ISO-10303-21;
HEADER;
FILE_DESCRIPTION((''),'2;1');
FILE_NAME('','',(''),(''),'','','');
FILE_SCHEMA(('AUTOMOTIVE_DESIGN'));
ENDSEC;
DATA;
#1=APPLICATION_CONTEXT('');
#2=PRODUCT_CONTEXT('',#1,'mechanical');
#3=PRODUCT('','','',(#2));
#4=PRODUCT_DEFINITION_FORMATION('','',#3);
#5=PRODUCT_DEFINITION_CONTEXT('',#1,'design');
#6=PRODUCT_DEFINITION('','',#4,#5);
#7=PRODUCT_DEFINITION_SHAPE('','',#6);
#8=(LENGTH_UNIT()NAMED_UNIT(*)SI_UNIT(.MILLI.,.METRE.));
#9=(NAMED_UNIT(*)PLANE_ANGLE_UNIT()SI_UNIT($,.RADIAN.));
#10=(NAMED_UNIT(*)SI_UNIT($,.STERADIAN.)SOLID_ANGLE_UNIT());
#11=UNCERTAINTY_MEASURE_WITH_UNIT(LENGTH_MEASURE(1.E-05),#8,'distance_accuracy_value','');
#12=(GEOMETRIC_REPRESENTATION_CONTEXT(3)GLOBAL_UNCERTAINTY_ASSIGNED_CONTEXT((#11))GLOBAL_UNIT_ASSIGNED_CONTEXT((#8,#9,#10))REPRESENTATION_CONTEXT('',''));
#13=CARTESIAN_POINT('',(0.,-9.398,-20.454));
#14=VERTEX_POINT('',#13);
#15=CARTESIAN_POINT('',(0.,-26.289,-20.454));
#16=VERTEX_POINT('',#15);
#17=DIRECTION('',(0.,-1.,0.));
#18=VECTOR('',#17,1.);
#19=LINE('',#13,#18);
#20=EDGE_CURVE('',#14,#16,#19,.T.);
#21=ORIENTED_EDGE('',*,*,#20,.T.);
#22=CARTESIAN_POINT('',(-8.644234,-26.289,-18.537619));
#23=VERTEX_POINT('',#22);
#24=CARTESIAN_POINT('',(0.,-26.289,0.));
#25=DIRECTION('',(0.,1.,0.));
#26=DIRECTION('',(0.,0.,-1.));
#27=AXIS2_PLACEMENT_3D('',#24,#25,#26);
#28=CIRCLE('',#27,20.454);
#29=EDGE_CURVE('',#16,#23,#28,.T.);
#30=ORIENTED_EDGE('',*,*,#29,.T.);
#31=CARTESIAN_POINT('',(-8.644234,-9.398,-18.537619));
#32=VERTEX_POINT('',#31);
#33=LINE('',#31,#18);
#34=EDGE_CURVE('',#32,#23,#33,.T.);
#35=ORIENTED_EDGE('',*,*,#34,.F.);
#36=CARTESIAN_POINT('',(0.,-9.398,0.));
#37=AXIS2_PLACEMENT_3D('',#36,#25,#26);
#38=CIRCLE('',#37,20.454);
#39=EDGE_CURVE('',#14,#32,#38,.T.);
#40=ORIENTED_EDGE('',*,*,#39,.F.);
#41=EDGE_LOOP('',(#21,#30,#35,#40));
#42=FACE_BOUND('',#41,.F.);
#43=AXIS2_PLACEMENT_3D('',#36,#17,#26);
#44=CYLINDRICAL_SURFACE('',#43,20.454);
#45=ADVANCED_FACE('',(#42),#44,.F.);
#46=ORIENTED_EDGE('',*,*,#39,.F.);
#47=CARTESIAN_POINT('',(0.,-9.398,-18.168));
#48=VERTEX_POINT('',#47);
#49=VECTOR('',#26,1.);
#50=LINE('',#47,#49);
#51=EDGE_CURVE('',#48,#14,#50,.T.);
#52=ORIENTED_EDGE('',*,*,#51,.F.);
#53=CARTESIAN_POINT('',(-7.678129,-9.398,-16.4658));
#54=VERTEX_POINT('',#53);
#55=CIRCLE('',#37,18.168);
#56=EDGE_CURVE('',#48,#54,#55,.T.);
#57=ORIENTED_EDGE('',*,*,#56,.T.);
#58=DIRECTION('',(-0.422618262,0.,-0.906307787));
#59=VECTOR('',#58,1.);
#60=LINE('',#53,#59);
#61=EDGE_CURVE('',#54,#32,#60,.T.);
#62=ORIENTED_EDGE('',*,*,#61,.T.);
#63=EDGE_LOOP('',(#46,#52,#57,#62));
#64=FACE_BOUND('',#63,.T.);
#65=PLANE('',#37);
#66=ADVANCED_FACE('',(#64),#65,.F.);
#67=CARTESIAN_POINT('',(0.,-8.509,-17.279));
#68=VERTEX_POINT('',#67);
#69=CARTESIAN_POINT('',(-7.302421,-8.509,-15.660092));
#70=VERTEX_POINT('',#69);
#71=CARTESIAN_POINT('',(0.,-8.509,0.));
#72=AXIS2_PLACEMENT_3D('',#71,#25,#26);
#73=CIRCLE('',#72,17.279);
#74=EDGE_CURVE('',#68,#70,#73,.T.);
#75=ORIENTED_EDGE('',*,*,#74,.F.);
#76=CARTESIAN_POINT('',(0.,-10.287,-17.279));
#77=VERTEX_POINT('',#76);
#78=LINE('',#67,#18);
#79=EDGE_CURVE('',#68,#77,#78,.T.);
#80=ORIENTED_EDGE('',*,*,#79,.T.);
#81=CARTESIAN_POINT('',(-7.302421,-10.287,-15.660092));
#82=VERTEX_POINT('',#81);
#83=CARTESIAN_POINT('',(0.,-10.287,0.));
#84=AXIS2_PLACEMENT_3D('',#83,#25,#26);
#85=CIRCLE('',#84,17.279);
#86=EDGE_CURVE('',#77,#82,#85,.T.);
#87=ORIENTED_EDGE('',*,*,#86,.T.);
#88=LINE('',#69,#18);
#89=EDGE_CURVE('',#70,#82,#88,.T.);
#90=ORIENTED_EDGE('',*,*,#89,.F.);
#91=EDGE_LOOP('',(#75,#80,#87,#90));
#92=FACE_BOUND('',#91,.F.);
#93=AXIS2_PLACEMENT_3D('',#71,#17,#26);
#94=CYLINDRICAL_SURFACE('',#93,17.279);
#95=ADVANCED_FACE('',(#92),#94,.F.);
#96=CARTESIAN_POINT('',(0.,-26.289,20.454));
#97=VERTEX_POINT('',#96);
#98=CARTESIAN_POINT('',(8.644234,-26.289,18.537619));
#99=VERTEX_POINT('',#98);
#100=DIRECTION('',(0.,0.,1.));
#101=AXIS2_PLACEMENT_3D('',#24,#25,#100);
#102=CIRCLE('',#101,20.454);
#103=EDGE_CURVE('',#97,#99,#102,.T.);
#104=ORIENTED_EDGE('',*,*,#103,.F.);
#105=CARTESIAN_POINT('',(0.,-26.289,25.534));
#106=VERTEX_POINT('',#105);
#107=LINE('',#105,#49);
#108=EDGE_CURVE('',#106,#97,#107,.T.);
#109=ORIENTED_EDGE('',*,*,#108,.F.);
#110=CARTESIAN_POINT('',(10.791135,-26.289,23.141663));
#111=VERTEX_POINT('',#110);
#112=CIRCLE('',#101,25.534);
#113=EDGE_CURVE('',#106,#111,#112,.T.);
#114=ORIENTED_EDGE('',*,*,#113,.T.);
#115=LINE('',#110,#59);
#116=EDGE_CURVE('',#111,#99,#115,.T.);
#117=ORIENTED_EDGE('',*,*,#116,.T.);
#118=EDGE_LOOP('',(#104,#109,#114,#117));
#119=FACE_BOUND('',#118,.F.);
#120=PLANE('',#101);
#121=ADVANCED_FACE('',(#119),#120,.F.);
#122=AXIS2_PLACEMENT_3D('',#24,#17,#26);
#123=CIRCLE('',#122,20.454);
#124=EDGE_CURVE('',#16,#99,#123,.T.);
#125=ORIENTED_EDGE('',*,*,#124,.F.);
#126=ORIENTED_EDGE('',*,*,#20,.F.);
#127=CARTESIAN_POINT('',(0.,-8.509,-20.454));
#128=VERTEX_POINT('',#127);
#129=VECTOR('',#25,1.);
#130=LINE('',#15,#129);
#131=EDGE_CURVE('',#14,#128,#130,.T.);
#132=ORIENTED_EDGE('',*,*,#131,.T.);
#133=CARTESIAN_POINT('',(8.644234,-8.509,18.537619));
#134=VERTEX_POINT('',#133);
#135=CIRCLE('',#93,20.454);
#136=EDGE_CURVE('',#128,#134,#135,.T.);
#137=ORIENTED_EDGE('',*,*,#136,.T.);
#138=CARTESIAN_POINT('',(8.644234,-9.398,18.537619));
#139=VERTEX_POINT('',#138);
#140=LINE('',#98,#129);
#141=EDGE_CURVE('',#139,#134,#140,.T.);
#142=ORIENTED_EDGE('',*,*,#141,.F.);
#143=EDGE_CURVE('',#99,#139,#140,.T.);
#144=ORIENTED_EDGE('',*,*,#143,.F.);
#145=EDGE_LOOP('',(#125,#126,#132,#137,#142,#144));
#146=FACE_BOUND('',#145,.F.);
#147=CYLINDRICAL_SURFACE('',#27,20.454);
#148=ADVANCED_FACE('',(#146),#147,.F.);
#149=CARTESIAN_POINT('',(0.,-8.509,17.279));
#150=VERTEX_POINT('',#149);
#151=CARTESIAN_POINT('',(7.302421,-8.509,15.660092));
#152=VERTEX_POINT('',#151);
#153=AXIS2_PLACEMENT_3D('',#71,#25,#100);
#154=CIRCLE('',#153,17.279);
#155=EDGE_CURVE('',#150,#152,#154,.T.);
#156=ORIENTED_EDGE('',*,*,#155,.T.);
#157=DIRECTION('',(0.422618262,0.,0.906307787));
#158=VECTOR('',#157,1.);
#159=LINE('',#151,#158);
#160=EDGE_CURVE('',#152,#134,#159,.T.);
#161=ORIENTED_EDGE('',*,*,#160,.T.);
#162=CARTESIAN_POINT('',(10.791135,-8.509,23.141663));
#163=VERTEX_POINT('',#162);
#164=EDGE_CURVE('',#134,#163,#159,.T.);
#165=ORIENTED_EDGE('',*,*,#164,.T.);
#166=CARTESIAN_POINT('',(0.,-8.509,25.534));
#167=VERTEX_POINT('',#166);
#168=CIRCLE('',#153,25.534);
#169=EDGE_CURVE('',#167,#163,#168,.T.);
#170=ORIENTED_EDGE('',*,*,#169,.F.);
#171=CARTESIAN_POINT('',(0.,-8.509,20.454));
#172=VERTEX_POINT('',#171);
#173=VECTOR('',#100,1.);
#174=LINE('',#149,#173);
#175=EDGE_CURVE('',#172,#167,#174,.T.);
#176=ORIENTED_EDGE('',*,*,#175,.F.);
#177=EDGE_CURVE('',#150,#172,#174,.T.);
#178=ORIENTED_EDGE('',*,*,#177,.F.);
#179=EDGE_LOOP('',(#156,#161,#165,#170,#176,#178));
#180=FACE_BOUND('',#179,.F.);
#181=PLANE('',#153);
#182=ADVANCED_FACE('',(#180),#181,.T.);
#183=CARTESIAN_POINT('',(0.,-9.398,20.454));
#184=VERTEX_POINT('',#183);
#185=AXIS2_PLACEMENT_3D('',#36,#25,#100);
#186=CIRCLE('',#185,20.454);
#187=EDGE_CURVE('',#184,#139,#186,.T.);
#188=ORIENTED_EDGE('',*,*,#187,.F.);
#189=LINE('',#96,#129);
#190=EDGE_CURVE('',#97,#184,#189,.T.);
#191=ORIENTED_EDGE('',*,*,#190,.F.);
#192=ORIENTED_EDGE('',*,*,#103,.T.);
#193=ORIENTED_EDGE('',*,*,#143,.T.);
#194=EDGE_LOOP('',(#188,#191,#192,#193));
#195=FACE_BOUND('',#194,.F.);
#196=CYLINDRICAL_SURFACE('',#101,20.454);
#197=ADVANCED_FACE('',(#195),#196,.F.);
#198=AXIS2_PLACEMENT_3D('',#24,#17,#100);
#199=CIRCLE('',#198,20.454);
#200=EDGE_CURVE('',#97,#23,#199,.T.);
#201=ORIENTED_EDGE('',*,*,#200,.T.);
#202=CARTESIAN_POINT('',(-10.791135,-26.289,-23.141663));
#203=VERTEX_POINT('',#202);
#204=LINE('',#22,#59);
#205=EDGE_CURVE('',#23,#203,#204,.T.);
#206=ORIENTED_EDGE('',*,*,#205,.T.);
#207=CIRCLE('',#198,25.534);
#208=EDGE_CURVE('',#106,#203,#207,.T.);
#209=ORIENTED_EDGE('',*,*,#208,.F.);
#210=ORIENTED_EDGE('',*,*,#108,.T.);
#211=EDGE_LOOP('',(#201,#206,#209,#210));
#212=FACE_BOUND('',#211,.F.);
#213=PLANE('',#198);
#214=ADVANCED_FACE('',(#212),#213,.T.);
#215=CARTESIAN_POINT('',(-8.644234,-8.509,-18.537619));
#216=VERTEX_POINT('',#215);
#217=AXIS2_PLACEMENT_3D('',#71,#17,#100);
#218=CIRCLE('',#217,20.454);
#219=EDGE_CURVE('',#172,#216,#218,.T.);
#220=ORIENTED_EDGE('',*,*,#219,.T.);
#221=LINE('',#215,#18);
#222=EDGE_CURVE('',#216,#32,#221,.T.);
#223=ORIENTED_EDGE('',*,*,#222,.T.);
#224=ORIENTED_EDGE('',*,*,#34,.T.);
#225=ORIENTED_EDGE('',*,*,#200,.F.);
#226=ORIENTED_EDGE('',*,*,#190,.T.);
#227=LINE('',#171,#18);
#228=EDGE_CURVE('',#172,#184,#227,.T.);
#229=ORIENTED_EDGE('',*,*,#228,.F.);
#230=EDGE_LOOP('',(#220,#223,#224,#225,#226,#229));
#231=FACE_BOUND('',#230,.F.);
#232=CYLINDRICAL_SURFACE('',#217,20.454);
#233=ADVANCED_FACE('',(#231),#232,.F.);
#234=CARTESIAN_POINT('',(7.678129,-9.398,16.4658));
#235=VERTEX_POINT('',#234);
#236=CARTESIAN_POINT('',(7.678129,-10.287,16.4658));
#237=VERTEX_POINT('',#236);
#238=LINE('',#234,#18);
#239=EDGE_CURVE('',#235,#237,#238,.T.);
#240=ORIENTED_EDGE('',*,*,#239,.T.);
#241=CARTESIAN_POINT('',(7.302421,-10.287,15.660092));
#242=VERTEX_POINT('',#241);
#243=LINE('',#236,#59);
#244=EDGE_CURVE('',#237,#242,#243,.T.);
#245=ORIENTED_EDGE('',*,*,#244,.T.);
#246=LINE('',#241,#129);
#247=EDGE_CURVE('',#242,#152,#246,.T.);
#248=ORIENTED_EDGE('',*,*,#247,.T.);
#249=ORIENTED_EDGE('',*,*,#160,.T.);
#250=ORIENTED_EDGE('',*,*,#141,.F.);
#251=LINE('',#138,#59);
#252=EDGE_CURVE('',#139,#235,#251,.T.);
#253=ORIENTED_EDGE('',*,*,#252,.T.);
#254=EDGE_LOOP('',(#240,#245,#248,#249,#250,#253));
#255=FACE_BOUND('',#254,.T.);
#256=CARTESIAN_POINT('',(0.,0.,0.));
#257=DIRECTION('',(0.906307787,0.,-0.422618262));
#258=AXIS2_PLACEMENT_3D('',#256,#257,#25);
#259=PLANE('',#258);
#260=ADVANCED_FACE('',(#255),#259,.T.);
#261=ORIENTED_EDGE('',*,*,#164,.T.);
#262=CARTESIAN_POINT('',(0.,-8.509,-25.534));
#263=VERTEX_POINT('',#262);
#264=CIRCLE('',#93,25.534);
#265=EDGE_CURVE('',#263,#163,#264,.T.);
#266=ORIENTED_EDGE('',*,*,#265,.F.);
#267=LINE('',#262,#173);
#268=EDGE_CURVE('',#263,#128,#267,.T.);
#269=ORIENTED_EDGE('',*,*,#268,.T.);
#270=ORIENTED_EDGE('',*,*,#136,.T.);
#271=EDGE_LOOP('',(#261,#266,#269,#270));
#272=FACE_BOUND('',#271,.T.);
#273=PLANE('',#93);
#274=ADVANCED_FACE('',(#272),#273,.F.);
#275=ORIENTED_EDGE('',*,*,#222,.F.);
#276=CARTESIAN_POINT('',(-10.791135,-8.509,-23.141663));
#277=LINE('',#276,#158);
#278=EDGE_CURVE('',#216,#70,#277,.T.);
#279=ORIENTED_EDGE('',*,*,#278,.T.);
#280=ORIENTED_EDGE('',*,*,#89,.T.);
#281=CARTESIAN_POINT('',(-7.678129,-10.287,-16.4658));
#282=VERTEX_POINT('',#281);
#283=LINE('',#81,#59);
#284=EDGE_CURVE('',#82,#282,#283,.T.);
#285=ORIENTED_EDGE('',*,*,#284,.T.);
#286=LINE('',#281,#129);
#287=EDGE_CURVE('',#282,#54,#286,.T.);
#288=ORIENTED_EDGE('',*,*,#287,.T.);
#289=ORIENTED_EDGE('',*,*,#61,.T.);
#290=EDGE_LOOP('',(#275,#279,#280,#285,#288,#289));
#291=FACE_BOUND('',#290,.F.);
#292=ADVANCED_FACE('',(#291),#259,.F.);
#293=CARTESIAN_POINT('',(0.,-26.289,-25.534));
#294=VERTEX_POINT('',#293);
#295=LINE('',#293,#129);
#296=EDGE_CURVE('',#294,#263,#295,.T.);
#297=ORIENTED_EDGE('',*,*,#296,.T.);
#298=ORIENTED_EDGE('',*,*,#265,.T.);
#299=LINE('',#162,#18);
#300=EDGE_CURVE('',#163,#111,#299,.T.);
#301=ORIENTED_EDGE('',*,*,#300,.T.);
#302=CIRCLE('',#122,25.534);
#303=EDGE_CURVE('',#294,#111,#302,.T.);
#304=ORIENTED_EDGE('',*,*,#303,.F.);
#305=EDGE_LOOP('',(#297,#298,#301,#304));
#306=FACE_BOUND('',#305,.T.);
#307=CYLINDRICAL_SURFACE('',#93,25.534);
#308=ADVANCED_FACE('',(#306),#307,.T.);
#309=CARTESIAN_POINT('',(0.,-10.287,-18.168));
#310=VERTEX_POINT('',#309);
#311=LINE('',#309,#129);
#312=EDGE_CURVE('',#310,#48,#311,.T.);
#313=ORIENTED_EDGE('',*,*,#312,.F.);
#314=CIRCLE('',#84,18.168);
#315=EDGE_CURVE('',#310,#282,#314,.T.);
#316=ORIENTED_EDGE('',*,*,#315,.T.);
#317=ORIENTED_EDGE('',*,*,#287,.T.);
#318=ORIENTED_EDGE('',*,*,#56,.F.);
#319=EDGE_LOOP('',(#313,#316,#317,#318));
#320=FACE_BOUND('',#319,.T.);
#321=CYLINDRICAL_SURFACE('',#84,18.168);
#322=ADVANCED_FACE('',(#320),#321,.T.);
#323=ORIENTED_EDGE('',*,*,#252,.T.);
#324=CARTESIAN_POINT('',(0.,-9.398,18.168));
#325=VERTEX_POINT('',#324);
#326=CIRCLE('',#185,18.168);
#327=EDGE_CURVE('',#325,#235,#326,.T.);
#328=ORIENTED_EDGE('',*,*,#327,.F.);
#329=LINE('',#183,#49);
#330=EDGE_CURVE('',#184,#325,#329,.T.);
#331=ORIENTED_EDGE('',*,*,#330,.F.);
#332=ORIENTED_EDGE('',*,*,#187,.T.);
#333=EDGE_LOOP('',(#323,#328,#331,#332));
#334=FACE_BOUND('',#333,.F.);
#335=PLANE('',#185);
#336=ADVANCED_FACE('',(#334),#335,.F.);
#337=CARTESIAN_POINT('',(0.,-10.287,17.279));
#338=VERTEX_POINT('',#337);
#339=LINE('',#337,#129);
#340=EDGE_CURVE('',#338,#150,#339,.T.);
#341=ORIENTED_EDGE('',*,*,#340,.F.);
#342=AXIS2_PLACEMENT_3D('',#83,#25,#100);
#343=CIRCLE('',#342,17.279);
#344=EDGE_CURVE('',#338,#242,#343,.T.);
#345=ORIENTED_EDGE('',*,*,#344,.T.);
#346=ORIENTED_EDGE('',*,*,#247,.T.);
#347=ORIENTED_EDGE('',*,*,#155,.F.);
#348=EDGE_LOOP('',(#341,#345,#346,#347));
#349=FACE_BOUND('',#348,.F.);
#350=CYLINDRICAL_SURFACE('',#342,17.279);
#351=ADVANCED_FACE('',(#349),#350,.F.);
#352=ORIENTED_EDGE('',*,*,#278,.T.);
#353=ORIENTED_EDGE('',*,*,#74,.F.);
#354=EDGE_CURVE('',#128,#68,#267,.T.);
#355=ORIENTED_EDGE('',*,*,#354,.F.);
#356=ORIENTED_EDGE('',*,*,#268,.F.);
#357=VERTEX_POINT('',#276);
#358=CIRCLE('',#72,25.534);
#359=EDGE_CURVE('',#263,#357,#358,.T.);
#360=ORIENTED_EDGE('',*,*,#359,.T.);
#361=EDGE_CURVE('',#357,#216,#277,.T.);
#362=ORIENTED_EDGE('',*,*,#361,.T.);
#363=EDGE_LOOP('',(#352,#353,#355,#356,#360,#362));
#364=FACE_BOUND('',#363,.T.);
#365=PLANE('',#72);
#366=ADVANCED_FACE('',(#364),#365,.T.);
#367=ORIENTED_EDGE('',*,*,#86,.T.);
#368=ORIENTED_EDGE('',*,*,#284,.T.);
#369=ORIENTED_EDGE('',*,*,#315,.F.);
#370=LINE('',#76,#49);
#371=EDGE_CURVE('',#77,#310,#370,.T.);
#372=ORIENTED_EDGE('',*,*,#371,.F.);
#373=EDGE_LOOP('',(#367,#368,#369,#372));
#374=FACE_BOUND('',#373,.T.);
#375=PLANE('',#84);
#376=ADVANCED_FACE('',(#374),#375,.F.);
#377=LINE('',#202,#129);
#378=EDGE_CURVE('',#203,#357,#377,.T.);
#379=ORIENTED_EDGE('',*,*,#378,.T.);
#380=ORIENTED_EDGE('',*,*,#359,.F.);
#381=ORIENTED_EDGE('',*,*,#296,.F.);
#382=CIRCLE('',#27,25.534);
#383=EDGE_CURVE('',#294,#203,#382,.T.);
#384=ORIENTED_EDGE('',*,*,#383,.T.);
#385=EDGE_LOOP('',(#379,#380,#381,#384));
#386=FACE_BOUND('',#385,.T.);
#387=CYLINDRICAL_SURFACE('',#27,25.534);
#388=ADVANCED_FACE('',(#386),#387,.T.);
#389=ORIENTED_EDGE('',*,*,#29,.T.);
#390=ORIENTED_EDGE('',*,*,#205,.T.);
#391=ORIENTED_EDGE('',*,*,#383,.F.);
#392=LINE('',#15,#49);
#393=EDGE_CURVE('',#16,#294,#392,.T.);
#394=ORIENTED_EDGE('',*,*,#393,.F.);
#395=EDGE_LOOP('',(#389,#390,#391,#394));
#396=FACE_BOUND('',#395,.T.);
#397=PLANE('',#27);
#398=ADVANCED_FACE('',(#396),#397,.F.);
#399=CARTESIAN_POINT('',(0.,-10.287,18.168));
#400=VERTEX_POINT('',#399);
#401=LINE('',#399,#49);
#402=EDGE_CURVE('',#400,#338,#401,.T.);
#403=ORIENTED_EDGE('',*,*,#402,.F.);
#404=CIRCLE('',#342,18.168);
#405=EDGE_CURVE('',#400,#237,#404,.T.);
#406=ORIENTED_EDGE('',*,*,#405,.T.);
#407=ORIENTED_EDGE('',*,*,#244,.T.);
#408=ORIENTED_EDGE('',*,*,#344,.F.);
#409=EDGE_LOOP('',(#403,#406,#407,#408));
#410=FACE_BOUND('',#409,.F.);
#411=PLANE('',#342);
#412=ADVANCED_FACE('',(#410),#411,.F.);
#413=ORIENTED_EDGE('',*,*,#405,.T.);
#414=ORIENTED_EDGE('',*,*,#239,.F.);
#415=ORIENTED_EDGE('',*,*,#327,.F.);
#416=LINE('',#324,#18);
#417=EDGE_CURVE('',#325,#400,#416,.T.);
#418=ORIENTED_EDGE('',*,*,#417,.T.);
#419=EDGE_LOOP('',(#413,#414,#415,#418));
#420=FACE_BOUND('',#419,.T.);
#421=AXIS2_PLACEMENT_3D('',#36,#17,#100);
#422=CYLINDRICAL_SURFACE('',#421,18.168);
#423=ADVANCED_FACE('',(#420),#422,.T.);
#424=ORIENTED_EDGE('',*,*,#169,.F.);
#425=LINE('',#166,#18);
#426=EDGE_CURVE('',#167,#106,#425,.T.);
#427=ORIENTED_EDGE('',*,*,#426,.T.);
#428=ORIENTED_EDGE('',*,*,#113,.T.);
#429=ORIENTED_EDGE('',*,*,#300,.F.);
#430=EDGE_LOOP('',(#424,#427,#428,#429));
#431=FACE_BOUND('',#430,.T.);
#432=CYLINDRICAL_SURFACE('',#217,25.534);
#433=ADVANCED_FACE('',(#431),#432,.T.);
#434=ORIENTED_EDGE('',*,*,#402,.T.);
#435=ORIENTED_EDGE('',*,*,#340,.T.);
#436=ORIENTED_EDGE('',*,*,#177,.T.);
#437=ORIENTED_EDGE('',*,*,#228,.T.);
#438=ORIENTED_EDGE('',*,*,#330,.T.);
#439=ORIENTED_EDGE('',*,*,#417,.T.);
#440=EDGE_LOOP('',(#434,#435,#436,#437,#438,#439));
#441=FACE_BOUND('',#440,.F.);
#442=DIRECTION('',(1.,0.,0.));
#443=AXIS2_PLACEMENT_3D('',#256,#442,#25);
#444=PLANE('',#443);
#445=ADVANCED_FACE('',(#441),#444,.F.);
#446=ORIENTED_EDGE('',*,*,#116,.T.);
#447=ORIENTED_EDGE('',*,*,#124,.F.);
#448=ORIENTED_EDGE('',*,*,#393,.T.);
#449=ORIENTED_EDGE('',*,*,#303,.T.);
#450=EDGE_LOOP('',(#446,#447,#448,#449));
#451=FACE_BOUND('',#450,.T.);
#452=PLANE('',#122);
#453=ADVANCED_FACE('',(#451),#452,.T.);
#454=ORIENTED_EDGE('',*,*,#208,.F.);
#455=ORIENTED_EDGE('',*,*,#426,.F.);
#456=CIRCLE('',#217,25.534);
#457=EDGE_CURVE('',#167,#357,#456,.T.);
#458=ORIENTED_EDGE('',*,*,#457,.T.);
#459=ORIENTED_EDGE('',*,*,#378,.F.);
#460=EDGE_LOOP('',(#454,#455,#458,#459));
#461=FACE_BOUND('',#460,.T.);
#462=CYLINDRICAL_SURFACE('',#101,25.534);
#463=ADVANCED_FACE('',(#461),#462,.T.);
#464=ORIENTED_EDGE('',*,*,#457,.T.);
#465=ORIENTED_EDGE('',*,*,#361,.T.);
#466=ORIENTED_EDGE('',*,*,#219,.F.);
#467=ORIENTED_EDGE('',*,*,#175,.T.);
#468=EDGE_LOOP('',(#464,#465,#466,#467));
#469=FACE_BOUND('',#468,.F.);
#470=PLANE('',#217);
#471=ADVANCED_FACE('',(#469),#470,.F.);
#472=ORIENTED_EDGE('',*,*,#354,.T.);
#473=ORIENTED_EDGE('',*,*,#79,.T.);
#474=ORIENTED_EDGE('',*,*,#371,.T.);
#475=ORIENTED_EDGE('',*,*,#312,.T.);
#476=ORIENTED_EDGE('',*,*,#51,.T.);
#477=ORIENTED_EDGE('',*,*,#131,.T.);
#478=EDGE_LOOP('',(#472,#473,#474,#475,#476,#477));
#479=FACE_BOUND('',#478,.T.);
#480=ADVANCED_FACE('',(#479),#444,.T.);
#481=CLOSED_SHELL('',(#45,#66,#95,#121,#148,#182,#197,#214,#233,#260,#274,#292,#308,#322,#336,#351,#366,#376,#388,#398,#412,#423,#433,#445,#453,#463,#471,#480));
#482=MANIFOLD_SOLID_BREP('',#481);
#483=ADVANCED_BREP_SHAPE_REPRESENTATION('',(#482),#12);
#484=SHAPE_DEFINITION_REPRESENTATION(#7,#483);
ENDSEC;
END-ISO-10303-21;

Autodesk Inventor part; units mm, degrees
ref_plane "YZ Plane" through (0, 0, 0) normal (1, 0, 0) x (0, 1, 0)
ref_plane "XZ Plane" through (0, 0, 0) normal (0, 1, 0) x (-1, 0, 0)
sketch "Sketch1" plane through (0, 0, 0) normal (1, 0, 0) x (0, 1, 0)
  line L0 (-8.509, -17.279) -> (-10.287, -17.279)
  line L1 (-10.287, -17.279) -> (-10.287, -18.168)
  line L2 (-10.287, -18.168) -> (-9.398, -18.168)
  line L3 (-9.398, -18.168) -> (-9.398, -20.454)
  line L4 (-9.398, -20.454) -> (-8.509, -20.454)
  line L5 (-8.509, 20.454) -> (-8.509, 17.279)
  line L6 (-8.509, 17.279) -> (-10.287, 17.279)
  line L7 (-10.287, 17.279) -> (-10.287, 18.168)
  line L8 (-10.287, 18.168) -> (-9.398, 18.168)
  line L9 (-9.398, 18.168) -> (-9.398, 20.454)
  line L10 (-8.509, 20.454) -> (-8.509, 25.534)
  line L11 (-8.509, 25.534) -> (-26.289, 25.534)
  line L12 (-26.289, 25.534) -> (-26.289, 20.454)
  line L13 (-26.289, 20.454) -> (-9.398, 20.454)
  line L14 (-8.509, -20.454) -> (-8.509, -25.534)
  line L15 (-8.509, -25.534) -> (-26.289, -25.534)
  line L16 (-26.289, -25.534) -> (-26.289, -20.454)
  line L17 (-26.289, -20.454) -> (-9.398, -20.454)
  line L18 (-26.289, 20.454) -> (-23.749, 20.454)
  line L19 (-8.509, -17.279) -> (-8.509, -20.454)
  line L20 (-8.509, -17.279) -> (-8.509, 17.279)
  line L21 (-8.509, 0) -> (-26.289, 0)
  dimension "d8" = 1.778
  dimension "d10" = 0.889
  dimension "d13" = 0.889
  dimension "d15" = 17.78
  dimension "d16" = 5.08
  dimension "d17" = 17.78
  dimension "d18" = 2.54
sketch "Sketch1 outline for Revolution1" plane through (0, 0, 0) normal (1, 0, 0) x (0, 1, 0)
  line L0 (-9.398, -18.168) -> (-9.398, -20.454)
  line L1 (-9.398, -20.454) -> (-26.289, -20.454)
  line L2 (-26.289, -20.454) -> (-26.289, -25.534)
  line L3 (-26.289, -25.534) -> (-8.509, -25.534)
  line L4 (-8.509, -25.534) -> (-8.509, -17.279)
  line L5 (-8.509, -17.279) -> (-10.287, -17.279)
  line L6 (-10.287, -17.279) -> (-10.287, -18.168)
  line L7 (-10.287, -18.168) -> (-9.398, -18.168)
  line L8 (-10.287, 17.279) -> (-8.509, 17.279)
  line L9 (-8.509, 17.279) -> (-8.509, 25.534)
  line L10 (-8.509, 25.534) -> (-26.289, 25.534)
  line L11 (-26.289, 25.534) -> (-26.289, 20.454)
  line L12 (-26.289, 20.454) -> (-9.398, 20.454)
  line L13 (-9.398, 20.454) -> (-9.398, 18.168)
  line L14 (-9.398, 18.168) -> (-10.287, 18.168)
  line L15 (-10.287, 18.168) -> (-10.287, 17.279)
revolve "Revolution1" add sketch "Sketch1 outline for Revolution1" angle 25 about axis through (0, -8.509, 0) along (0, 1, 0)
ref_plane "Work Plane1" through (0, -8.509, -25.534) normal (-1, 0, 0) x (0, -1, 0)
sketch "Sketch2" plane through (0, -8.509, -25.534) normal (-1, 0, 0) x (0, -1, 0)
  line L0 (0.889, 5.08) -> (17.78, 5.08)
  line L1 (17.78, 5.08) -> (17.78, 0)
  line L2 (0, 51.068) -> (17.78, 51.068)
  line L3 (17.78, 51.068) -> (0, 51.068)
  line L4 (-8.509, 25.534) -> (17.78, 25.534)
  line L5 (17.78, 51.068) -> (0, 51.068)
  line L6 (0, 51.068) -> (0, 45.988)
  line L7 (0, 45.988) -> (17.78, 45.988)
  line L8 (17.78, 45.988) -> (17.78, 51.068)
  line L9 (0.889, 5.08) -> (0, 5.08)
  line L10 (17.78, 5.08) -> (17.78, 0)
  line L11 (17.78, 2.392337) -> (17.78, 0)
  line L12 (17.78, 0) -> (0, 0)
  line L13 (0, 0) -> (0, 5.08)
  point P0 (0.889, 7.366)
sketch "Sketch2 outline for Revolution2" plane through (0, -8.509, -25.534) normal (-1, 0, 0) x (0, -1, 0)
  line L0 (17.78, 5.08) -> (0, 5.08)
  line L1 (0, 5.08) -> (0, 0)
  line L2 (0, 0) -> (17.78, 0)
  line L3 (17.78, 0) -> (17.78, 5.08)
  line L4 (17.78, 45.988) -> (17.78, 51.068)
  line L5 (0, 45.988) -> (17.78, 45.988)
  line L6 (0, 51.068) -> (0, 45.988)
  line L7 (17.78, 51.068) -> (0, 51.068)
revolve "Revolution2" add sketch "Sketch2 outline for Revolution2" angle 155 about axis through (0, 0, 0) along (0, -1, 0)
properties part number "RSL light mount (guard 1)"
